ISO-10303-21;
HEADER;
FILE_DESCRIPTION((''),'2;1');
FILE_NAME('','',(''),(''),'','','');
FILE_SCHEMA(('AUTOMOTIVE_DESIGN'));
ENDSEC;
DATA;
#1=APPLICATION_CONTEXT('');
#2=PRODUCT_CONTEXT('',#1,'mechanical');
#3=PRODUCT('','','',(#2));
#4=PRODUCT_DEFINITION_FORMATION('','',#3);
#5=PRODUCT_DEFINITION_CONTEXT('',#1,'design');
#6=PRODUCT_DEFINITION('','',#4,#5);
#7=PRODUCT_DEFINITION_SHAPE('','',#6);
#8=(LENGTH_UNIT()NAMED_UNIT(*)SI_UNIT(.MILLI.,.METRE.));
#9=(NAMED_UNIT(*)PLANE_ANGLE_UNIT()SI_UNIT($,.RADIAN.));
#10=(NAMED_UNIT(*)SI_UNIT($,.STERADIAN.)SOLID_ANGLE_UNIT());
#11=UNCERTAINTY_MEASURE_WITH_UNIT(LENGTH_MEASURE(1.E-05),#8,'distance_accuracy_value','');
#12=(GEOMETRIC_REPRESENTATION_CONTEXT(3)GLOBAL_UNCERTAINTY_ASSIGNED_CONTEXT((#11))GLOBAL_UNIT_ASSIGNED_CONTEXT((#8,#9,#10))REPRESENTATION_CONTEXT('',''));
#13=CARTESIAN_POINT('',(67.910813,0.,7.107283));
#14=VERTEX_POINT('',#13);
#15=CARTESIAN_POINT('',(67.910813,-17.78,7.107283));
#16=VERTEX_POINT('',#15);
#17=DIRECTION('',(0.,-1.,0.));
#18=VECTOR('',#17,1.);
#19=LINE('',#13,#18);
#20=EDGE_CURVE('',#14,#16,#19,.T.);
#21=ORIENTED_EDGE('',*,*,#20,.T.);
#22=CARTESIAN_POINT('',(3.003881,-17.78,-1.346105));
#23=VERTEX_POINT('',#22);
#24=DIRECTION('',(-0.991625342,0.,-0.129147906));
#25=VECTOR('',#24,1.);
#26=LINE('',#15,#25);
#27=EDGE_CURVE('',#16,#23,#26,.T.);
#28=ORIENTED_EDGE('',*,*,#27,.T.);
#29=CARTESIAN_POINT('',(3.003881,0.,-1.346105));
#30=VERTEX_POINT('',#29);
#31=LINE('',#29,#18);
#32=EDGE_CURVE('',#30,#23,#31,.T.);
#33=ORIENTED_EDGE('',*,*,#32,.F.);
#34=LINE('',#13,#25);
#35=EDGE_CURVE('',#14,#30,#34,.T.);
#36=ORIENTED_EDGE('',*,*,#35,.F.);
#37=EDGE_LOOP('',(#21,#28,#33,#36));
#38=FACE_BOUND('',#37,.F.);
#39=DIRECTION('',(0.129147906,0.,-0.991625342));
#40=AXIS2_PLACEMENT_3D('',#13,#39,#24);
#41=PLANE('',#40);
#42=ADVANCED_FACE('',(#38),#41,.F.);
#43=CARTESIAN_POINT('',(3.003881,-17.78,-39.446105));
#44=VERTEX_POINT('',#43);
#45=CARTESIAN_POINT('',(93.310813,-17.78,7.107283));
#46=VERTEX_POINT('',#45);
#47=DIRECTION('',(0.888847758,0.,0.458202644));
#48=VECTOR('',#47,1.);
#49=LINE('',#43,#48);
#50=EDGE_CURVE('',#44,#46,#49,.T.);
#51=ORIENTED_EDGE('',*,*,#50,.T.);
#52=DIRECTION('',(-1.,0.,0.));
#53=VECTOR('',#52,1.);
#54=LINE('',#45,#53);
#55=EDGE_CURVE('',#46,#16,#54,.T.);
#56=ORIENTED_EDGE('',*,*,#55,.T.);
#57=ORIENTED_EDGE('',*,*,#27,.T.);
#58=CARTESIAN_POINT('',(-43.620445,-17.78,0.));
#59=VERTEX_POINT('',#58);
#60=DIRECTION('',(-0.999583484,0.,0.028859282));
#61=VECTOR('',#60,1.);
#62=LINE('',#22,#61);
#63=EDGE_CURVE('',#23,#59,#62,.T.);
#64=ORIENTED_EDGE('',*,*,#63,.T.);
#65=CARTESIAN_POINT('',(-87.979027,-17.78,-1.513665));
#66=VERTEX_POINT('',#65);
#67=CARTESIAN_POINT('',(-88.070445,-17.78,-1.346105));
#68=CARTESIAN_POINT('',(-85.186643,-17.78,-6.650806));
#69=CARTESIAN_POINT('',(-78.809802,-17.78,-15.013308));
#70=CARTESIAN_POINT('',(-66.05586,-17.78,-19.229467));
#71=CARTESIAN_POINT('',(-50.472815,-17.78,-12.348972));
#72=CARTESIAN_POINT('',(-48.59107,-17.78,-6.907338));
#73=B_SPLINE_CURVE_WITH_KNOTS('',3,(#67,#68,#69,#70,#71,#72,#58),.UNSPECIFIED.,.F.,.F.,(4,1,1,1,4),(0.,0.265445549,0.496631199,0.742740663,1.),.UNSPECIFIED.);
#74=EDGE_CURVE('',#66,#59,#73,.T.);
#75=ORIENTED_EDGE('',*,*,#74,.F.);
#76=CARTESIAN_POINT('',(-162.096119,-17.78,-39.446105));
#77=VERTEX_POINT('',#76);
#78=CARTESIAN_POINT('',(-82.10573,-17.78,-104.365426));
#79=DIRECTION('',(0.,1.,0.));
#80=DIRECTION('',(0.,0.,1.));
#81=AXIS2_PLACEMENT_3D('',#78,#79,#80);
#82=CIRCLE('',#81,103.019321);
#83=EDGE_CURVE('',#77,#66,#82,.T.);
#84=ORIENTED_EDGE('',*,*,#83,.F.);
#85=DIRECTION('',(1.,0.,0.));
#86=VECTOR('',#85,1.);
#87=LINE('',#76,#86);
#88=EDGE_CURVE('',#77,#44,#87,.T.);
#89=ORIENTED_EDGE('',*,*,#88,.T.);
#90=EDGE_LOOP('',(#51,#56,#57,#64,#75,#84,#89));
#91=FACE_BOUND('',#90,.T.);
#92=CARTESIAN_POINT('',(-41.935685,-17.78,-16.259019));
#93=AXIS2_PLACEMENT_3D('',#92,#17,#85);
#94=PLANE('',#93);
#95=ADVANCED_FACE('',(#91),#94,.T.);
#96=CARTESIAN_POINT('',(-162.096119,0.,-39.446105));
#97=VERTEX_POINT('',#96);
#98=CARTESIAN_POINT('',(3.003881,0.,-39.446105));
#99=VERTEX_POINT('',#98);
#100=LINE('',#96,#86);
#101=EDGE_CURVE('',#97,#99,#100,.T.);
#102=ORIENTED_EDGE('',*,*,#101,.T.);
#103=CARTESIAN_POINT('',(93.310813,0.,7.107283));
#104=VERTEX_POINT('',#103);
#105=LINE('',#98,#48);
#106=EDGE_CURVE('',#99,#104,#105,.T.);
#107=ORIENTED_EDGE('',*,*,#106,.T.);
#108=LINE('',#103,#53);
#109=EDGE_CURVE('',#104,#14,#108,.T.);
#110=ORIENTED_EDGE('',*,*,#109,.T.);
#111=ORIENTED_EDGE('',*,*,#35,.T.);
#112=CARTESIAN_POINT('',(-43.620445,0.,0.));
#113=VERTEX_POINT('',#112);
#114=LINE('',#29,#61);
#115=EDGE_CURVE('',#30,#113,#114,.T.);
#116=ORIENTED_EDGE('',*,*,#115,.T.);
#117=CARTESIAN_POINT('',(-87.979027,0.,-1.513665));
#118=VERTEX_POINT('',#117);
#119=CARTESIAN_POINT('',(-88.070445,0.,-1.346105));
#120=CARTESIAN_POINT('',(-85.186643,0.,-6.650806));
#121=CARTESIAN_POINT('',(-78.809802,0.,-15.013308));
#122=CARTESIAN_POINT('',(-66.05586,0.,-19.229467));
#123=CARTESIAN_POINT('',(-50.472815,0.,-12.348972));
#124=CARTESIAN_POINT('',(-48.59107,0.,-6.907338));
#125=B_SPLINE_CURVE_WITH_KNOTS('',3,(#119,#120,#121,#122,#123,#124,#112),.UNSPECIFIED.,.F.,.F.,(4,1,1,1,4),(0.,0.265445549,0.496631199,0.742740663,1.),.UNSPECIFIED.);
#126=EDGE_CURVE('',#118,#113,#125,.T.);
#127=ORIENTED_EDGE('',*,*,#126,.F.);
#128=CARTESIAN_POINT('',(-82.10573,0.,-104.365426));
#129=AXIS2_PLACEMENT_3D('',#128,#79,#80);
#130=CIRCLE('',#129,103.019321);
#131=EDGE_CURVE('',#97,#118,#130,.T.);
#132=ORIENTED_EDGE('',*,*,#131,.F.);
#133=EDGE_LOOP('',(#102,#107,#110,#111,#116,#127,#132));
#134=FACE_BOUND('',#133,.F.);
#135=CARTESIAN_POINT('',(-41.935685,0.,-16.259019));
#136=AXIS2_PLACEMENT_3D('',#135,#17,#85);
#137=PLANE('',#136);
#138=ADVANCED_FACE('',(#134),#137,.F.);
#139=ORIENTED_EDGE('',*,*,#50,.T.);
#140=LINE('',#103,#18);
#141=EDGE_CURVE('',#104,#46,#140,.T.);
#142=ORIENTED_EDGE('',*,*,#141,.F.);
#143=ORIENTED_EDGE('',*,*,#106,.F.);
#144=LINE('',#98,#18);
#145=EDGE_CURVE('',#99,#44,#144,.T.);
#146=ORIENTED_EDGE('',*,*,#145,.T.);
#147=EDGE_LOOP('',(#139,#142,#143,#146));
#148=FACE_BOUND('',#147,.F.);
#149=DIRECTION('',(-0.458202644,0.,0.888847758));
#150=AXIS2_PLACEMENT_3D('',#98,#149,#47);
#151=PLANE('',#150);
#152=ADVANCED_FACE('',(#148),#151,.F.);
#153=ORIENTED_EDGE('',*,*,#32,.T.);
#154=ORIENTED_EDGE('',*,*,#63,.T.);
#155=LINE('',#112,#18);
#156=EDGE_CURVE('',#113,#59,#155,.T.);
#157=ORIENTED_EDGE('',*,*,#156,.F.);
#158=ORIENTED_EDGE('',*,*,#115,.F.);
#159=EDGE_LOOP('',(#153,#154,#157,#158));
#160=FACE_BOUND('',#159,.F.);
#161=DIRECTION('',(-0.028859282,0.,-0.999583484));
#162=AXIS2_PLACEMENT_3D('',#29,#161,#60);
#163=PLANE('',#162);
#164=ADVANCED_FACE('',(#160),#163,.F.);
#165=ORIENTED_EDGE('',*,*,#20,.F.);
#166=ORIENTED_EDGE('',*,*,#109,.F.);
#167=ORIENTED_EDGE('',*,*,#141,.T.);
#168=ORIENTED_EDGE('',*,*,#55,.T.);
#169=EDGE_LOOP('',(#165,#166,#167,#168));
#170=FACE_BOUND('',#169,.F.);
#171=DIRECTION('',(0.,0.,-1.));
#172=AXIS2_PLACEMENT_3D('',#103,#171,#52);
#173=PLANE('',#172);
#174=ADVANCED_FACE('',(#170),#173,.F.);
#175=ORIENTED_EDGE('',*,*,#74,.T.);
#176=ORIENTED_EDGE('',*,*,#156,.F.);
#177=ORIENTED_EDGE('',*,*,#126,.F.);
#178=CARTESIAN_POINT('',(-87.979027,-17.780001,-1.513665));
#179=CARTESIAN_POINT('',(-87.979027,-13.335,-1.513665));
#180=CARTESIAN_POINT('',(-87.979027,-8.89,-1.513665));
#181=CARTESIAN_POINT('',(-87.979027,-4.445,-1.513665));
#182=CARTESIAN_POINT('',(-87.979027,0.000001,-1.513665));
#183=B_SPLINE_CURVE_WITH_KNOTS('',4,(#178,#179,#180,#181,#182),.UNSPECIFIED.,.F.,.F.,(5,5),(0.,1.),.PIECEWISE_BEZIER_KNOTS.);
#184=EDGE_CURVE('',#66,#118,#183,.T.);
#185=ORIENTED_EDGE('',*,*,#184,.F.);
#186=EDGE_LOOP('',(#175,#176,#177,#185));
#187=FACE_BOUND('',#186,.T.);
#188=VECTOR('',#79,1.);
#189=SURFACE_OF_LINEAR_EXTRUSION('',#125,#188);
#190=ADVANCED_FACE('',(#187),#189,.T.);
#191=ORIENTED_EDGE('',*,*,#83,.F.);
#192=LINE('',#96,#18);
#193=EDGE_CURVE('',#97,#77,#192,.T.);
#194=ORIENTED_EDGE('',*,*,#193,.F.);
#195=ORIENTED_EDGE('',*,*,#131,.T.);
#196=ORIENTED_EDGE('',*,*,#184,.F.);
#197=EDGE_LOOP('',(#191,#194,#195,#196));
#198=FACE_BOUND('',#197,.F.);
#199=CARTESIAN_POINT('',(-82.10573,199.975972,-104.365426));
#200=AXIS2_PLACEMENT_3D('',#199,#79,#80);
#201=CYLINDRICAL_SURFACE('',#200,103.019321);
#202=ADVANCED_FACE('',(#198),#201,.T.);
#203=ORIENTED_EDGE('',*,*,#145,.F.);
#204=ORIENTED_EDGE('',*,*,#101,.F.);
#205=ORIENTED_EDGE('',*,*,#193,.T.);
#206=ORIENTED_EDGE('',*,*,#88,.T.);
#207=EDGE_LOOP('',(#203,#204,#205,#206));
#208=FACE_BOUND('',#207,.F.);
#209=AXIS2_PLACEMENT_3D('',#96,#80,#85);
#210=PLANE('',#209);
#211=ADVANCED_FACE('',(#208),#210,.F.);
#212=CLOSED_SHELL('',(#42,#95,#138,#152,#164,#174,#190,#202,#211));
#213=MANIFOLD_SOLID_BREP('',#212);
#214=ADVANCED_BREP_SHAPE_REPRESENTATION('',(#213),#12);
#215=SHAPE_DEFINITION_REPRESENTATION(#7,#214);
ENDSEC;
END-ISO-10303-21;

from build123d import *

# Parameters (mm, degrees)
F1_DEPTH    = 17.78
F2_T1_DEPTH = 417.7319430625


# Not quite as in the source:
# - a fillet or chamfer that OpenCascade refuses, or shapes differently, is made with other operations: its cross-section is extruded or revolved along the edge and cut away or added


with BuildPart() as f1:
    # F0 (on Front) → F1 (new body)
    with BuildSketch(Plane.XZ):
        with BuildLine():
            Line((-162.0961189375, -1.346105228), (-162.0961189375, -39.446105228))
            Line((-162.0961189375, -39.446105228), (3.0038810625, -39.446105228))
            Line((3.0038810625, -39.446105228), (93.3108132751, 7.1072834172))
            Line((93.3108132751, 7.1072834172), (67.9108132751, 7.1072834172))
            Line((67.9108132751, 7.1072834172), (3.0038810625, -1.346105228))
            Line((3.0038810625, -1.346105228), (-43.6204448342, 0))
            add(Edge.make_bspline(
                [(-88.0704448342, -1.346105228), (-85.1866431635, -6.6508062653), (-78.8098016913, -15.013308036), (-66.0558603131, -19.2294666036), (-50.4728148138, -12.3489722112), (-48.5910698771, -6.9073382765), (-43.6204448342, 0)],
                knots=[0, 0, 0, 0, 0.2654455487, 0.4966311992, 0.7427406625, 1, 1, 1, 1], degree=3))
            Line((-88.0704448342, -1.346105228), (-162.0961189375, -1.346105228))
        make_face()
    extrude(amount=F1_DEPTH)

    # F2: fillet of radius 103.0193211336 on 1 edges, made by hand

    # F2_s2 → F2_t1 (cut)
    with BuildSketch(Plane.XZ.offset(-199.9759715313)):
        with BuildLine():
            ThreePointArc((-82.105730325, -1.346105228), (-126.4060471139, -11.3575640099), (-162.0961189375, -39.446105228))
            Line((-162.0961189375, -39.446105228), (-162.0961189375, -1.346105228))
            Line((-162.0961189375, -1.346105228), (-82.105730325, -1.346105228))
        make_face()
    extrude(amount=F2_T1_DEPTH, mode=Mode.SUBTRACT)


solid = f1.part
